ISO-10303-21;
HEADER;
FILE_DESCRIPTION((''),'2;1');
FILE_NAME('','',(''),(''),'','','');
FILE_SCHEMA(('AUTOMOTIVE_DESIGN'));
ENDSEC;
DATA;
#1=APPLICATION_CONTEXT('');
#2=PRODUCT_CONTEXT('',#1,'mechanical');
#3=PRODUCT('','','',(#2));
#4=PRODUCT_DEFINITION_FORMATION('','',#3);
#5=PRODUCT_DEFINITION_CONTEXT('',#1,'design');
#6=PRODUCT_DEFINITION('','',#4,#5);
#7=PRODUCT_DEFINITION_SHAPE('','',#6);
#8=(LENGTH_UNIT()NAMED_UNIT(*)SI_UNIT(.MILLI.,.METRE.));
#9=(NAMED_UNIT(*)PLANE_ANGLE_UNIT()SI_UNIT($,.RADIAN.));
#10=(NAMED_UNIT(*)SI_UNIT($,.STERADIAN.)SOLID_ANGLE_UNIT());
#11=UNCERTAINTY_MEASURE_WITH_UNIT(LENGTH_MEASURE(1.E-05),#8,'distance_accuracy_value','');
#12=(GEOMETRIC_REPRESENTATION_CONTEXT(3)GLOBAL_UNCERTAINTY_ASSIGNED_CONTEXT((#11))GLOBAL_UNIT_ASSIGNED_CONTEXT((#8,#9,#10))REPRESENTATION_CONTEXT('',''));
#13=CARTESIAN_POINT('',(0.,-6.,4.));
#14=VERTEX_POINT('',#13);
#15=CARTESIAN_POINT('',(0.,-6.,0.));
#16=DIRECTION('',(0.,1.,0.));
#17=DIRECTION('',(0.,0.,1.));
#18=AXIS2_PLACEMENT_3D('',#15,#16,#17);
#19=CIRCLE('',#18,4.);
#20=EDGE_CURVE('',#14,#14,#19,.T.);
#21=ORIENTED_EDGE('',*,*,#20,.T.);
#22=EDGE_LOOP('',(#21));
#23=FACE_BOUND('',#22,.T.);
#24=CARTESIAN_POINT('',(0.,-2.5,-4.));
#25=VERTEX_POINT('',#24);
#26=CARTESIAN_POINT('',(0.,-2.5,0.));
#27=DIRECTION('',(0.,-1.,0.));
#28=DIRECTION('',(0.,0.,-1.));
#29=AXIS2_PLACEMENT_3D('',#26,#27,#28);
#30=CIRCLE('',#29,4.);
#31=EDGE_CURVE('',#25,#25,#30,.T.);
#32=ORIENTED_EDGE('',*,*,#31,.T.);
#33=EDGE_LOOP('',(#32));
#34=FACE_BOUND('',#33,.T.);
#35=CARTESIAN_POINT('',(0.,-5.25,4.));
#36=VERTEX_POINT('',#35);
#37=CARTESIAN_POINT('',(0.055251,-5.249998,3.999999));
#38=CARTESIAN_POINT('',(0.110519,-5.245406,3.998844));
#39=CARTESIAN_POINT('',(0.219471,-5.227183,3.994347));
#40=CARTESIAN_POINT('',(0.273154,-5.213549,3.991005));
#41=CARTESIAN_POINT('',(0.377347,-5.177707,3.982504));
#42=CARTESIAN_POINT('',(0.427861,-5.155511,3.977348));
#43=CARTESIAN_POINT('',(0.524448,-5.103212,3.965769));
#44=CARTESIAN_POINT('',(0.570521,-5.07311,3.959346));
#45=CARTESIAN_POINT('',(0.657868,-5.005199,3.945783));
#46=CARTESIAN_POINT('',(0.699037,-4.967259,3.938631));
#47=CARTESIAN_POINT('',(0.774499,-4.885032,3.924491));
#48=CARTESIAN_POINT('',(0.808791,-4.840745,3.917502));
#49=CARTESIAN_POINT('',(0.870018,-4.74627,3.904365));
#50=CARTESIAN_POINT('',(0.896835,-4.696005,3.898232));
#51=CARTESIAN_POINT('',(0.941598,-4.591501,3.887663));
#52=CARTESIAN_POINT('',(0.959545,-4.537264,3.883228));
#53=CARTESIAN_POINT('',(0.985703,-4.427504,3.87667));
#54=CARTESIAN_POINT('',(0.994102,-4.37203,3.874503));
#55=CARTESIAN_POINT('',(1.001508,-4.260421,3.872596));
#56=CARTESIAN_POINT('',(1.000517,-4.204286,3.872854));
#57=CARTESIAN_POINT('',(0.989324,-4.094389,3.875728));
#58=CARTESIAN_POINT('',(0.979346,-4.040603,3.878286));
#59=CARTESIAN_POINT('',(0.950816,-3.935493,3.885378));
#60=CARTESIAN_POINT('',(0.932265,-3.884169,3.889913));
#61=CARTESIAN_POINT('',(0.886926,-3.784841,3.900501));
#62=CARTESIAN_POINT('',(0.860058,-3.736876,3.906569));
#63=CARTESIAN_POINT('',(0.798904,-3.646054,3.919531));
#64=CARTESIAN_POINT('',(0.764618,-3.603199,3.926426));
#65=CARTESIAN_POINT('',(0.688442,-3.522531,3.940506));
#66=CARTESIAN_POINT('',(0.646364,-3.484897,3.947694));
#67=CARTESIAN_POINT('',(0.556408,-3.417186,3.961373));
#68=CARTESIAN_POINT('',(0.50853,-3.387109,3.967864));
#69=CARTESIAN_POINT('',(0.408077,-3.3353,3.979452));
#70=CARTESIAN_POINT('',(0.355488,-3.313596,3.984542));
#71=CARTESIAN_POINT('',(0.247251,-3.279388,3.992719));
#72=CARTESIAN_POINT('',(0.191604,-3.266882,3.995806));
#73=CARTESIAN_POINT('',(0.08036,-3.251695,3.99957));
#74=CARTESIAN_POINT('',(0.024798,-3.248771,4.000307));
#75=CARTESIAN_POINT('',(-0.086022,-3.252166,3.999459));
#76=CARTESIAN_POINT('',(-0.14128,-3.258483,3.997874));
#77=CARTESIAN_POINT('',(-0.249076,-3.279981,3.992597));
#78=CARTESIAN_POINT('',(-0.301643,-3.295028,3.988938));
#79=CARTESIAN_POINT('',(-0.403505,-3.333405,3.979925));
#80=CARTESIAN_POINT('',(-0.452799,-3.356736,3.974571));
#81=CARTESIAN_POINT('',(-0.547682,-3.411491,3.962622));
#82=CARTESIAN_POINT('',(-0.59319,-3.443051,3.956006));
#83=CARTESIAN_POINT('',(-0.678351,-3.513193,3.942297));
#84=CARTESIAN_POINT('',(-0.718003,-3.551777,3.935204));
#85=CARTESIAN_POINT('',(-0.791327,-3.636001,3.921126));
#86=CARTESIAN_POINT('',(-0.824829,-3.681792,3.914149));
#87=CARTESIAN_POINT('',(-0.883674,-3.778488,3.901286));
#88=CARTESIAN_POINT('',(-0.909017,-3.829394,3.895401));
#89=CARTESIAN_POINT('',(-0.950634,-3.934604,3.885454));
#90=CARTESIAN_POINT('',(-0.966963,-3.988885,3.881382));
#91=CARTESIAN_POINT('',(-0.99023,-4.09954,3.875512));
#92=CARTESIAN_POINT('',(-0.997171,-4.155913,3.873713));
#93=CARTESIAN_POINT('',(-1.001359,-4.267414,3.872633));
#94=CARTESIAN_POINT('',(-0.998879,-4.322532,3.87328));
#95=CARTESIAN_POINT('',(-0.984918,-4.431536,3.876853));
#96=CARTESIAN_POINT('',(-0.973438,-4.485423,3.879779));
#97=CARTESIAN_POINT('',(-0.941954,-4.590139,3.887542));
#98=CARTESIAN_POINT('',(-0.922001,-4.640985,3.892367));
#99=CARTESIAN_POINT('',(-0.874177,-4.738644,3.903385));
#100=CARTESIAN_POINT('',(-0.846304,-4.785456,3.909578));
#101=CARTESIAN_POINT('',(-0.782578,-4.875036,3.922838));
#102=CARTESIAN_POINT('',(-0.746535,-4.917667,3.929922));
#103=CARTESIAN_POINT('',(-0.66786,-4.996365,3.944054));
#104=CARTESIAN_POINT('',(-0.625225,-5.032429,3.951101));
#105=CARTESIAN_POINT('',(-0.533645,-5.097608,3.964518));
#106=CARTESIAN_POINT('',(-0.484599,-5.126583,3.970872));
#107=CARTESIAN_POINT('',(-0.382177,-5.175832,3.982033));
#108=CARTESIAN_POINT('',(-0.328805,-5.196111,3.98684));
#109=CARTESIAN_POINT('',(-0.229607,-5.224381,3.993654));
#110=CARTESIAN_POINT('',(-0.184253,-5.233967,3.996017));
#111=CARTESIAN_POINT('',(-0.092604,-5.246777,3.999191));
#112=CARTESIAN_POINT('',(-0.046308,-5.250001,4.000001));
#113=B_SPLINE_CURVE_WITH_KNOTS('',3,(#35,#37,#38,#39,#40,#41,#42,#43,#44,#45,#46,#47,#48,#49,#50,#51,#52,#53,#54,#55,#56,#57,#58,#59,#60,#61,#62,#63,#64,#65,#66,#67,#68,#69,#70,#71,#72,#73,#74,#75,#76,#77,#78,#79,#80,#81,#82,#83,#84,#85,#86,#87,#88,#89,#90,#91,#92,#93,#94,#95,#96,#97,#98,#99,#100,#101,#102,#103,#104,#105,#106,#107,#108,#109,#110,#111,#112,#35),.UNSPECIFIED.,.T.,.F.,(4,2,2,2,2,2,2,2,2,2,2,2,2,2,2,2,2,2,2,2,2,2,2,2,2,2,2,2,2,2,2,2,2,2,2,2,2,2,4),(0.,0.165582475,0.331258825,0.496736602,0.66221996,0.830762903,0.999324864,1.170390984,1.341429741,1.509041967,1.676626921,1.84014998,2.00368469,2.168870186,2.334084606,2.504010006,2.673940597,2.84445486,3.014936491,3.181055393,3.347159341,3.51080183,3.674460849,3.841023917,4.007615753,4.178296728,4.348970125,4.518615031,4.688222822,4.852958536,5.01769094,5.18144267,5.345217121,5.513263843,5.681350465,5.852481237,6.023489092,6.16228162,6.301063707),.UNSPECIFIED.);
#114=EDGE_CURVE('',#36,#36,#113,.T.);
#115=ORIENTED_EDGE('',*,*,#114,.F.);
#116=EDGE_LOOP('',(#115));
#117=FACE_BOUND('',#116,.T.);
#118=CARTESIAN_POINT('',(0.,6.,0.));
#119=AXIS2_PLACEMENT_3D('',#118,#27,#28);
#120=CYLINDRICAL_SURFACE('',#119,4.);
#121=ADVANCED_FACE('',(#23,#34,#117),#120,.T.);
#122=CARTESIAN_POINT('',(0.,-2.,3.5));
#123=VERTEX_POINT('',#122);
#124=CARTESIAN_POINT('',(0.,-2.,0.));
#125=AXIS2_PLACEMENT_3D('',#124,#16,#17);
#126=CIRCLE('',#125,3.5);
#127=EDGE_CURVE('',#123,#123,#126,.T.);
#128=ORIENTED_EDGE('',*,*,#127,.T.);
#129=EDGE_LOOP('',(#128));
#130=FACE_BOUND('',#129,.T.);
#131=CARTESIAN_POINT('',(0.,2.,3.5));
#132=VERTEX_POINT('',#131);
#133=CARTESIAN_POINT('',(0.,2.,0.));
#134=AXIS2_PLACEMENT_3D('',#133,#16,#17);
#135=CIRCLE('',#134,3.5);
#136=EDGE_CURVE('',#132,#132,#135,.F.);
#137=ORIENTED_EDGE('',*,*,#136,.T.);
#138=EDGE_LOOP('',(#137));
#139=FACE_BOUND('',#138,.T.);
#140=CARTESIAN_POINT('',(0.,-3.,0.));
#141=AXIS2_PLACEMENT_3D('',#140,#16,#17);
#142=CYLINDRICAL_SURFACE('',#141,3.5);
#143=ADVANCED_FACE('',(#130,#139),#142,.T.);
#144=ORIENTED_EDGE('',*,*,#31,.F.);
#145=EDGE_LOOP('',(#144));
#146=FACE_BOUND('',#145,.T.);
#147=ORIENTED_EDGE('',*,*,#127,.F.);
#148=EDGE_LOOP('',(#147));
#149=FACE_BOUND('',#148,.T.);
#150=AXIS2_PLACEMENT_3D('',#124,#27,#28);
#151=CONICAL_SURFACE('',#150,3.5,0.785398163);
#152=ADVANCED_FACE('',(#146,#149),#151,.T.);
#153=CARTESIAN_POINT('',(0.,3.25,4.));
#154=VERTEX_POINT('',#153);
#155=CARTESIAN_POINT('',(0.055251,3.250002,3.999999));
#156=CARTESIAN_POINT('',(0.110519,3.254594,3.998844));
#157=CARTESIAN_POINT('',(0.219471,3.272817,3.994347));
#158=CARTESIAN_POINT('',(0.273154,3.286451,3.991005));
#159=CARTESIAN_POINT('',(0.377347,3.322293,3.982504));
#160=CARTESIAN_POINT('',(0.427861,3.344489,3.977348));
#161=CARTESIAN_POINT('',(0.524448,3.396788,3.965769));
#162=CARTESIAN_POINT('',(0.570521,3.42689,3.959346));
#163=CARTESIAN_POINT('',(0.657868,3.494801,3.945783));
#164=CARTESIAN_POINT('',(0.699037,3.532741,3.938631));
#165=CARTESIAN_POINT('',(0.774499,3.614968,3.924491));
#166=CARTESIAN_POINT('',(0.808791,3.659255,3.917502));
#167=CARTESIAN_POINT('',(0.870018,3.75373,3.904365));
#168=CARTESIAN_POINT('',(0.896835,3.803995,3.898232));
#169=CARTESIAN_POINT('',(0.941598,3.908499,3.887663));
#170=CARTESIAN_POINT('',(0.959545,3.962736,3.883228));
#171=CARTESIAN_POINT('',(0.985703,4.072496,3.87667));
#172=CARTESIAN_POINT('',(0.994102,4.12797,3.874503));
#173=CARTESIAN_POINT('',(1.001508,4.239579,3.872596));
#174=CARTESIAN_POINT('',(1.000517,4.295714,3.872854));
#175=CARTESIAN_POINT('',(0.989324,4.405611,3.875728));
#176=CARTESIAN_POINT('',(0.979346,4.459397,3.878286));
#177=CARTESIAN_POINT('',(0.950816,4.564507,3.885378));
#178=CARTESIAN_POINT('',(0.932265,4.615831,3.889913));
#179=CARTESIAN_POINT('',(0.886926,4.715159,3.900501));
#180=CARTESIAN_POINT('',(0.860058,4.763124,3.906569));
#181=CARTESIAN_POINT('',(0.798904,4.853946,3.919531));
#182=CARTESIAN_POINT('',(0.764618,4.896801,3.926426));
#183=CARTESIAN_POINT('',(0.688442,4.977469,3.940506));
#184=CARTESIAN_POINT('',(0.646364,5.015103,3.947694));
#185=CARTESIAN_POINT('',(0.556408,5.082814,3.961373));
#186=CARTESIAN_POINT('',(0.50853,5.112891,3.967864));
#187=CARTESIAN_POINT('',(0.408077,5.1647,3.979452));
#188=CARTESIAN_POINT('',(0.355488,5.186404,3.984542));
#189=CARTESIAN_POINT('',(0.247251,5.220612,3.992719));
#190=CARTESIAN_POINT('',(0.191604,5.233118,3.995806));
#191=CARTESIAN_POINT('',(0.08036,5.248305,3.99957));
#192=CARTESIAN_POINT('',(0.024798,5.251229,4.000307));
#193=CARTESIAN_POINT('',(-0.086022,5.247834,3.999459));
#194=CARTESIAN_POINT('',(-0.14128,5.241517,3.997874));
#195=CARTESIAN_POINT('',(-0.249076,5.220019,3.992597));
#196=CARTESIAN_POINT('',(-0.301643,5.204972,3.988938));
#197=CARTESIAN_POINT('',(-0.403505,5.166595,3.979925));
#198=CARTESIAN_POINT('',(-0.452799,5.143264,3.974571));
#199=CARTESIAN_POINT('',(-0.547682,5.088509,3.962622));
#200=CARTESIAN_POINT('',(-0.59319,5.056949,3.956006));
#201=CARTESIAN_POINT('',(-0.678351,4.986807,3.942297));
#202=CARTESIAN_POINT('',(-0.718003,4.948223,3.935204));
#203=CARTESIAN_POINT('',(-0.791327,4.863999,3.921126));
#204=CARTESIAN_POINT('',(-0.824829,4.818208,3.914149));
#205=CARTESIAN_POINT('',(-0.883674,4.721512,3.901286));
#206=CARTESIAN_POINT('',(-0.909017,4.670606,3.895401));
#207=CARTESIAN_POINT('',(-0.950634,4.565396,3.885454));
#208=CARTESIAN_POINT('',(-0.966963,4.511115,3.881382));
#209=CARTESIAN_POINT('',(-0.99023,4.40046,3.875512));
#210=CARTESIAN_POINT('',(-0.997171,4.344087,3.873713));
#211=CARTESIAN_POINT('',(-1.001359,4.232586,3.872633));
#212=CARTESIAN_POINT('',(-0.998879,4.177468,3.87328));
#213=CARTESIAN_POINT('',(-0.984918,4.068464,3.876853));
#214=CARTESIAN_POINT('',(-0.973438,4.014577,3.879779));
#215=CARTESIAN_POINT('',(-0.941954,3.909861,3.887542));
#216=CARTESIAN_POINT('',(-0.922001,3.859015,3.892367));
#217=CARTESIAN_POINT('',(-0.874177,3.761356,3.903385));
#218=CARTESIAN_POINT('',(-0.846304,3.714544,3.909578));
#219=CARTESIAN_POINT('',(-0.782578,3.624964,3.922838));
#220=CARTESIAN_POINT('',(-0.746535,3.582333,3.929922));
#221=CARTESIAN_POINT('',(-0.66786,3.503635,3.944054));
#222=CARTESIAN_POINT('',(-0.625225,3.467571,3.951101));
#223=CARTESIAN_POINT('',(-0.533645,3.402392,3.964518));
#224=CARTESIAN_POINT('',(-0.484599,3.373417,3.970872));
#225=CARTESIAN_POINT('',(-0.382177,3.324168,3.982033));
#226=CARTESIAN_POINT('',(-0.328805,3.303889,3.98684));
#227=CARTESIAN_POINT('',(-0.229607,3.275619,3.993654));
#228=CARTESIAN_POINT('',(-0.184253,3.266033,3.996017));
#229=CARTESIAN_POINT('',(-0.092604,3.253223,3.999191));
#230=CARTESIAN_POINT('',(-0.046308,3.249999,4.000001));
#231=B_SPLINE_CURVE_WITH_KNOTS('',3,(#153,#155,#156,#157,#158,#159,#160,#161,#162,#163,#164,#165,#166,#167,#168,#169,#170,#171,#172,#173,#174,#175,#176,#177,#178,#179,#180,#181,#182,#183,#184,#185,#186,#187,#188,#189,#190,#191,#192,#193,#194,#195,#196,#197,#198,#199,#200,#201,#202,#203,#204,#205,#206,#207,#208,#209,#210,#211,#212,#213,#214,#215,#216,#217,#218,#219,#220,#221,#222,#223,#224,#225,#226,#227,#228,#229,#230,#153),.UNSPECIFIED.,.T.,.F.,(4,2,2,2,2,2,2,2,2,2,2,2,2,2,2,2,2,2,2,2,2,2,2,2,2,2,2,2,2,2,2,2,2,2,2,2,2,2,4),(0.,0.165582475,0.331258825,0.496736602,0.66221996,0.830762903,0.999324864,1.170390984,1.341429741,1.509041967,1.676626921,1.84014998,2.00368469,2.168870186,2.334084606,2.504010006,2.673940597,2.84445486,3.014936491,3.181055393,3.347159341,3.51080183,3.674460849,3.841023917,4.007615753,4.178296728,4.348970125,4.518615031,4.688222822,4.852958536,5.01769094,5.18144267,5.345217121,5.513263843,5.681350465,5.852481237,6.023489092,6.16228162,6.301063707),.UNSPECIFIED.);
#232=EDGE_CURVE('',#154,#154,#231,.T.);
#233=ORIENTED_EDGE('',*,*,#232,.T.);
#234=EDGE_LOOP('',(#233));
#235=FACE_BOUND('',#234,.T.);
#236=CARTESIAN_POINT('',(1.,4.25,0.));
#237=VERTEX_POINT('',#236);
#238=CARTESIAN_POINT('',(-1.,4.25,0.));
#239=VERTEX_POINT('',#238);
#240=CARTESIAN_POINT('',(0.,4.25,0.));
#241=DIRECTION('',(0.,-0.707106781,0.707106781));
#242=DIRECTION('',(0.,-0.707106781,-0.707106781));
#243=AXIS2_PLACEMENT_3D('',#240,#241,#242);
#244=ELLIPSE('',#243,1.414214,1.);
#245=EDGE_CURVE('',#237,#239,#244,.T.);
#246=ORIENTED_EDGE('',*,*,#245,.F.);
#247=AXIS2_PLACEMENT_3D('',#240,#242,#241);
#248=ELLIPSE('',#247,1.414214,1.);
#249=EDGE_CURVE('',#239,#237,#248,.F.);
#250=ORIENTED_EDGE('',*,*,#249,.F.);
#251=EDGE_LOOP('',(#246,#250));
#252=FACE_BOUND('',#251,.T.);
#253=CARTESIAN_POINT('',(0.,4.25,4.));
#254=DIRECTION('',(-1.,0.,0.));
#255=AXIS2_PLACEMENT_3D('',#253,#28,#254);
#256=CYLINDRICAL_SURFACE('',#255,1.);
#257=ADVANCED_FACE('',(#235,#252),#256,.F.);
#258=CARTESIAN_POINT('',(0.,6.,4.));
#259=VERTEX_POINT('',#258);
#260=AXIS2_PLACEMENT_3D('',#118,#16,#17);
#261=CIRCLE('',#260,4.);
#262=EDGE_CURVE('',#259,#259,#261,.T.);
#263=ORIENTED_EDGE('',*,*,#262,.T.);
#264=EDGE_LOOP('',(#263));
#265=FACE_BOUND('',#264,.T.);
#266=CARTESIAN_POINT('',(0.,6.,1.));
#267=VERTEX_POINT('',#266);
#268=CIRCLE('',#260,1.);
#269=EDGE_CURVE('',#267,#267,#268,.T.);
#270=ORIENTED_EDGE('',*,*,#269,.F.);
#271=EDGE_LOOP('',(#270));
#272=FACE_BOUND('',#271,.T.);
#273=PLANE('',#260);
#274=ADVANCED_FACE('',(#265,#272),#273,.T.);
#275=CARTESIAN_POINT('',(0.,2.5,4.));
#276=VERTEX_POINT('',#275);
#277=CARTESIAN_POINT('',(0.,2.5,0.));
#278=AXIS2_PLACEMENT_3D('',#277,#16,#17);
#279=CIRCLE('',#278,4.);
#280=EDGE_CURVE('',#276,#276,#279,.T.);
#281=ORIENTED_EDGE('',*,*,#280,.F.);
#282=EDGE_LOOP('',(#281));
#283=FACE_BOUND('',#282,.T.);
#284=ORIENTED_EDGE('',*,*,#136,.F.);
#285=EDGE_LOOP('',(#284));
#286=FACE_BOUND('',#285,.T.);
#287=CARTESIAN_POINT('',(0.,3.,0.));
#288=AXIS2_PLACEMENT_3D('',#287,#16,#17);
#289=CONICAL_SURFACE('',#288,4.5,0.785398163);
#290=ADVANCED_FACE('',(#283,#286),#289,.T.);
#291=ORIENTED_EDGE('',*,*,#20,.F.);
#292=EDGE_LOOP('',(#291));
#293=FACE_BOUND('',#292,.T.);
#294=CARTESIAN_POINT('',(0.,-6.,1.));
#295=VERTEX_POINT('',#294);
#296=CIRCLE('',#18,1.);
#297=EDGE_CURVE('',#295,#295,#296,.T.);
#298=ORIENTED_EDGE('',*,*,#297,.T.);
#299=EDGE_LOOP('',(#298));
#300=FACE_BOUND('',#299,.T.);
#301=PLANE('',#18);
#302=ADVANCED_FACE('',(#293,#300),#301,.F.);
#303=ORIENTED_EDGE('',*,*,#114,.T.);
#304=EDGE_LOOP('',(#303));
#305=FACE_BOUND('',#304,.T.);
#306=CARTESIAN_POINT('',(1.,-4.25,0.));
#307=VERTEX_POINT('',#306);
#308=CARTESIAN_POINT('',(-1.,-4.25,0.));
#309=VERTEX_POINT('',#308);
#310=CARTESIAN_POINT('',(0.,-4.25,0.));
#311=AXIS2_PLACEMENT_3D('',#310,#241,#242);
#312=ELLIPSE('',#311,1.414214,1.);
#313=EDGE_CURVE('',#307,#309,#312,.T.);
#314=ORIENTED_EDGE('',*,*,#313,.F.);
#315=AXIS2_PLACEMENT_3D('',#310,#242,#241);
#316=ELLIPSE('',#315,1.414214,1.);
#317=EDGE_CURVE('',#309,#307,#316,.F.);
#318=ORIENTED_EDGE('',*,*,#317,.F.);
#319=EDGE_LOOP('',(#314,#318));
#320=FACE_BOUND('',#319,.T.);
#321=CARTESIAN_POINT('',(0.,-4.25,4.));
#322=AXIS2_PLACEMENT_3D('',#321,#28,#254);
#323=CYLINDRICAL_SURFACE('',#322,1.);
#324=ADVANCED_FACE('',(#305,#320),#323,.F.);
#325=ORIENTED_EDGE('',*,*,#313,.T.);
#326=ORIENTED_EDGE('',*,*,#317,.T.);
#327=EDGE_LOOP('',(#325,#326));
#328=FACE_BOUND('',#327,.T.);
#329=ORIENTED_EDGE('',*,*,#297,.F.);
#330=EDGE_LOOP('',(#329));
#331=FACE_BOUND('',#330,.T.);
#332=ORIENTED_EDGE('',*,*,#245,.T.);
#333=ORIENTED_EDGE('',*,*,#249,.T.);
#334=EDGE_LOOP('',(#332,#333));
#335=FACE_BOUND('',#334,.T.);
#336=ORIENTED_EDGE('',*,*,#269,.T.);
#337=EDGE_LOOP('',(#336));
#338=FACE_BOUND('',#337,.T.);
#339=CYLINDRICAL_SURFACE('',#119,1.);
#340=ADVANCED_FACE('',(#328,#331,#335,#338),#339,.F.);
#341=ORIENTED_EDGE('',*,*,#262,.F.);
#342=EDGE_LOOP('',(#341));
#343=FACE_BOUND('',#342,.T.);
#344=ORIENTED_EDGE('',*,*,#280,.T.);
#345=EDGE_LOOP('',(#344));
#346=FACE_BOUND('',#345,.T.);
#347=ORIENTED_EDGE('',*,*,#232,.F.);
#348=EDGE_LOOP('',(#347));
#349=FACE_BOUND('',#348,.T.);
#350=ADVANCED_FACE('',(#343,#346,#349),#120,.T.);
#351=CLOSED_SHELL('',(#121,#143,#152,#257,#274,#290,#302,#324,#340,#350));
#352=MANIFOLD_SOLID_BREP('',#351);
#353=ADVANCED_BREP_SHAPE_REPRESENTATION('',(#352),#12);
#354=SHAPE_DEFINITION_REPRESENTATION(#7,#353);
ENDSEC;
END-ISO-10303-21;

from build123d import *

# Parameters (mm, degrees)
SKETCH1_R           = 4
SKETCH1_R_2         = 1
BOSS_EXTRUDE1_DEPTH = 6
SKETCH2_R           = 10.066838553
SKETCH2_R_2         = 3.5
CUT_EXTRUDE1_DEPTH  = 3
CHAMFER1_SIZE       = 1
SKETCH3_R           = 1
CUT_EXTRUDE2_DEPTH  = 9.246211251


with BuildPart() as part:
    # Sketch1 → Boss-Extrude1 (new, symmetric)
    with BuildSketch(Plane(origin=(0, 0, 0), x_dir=(1, 0, 0), z_dir=(0, 1, 0))):
        with Locations(Location((0, 0, 0), (0, 0, 270))):
            Circle(SKETCH1_R)
        with Locations(Location((0, 0, 0), (0, 0, 270))):
            Circle(SKETCH1_R_2, mode=Mode.SUBTRACT)
    extrude(amount=BOSS_EXTRUDE1_DEPTH, both=True)

    # Sketch2 → Cut-Extrude1 (cut, symmetric)
    with BuildSketch(Plane(origin=(0, 0, 0), x_dir=(1, 0, 0), z_dir=(0, 1, 0))):
        Circle(SKETCH2_R)
        with Locations(Location((0, 0, 0), (0, 0, 270))):
            Circle(SKETCH2_R_2, mode=Mode.SUBTRACT)
    extrude(amount=CUT_EXTRUDE1_DEPTH, both=True, mode=Mode.SUBTRACT)

    # Chamfer1
    # the kernel refuses this chamfer: 1 mm, written as the material it adds along each edge
    with BuildSketch(Plane(origin=(0, -3, 0), x_dir=(0, 0, 1), z_dir=(-1, 0, 0))) as chamfer1_piece_1_section:
        Polygon((3.5 + CHAMFER1_SIZE, 0), (3.5, CHAMFER1_SIZE), (3.5, 0), align=None)
    chamfer1_piece_1 = revolve(axis=Axis((0, -3, 0), (0, 1, 0)), mode=Mode.PRIVATE)
    chamfer1_piece_1 = chamfer1_piece_1 & Plane(origin=(0, -2.250849305, 0), x_dir=(0, 0, 1), z_dir=(0, 1, 0)) * Cylinder(4, 18, mode=Mode.PRIVATE)
    add(chamfer1_piece_1)
    with BuildSketch(Plane(origin=(0, 3, 0), x_dir=(0, 0, 1), z_dir=(-1, 0, 0))) as chamfer1_piece_2_section:
        Polygon((3.5, -CHAMFER1_SIZE), (3.5 + CHAMFER1_SIZE, 0), (3.5, 0), align=None)
    chamfer1_piece_2 = revolve(axis=Axis((0, 3, 0), (0, 1, 0)), mode=Mode.PRIVATE)
    chamfer1_piece_2 = chamfer1_piece_2 & Plane(origin=(0, 2.250849305, 0), x_dir=(0, 0, 1), z_dir=(0, 1, 0)) * Cylinder(4, 18, mode=Mode.PRIVATE)
    add(chamfer1_piece_2)

    # Sketch3 → Cut-Extrude2 (cut, through all)
    with BuildSketch(Plane.XY):
        with Locations(Location((0, 4.25, 0), (0, 0, 270))):
            Circle(SKETCH3_R)
        with Locations(Location((0, -4.25, 0), (0, 0, 270))):
            Circle(SKETCH3_R)
    extrude(amount=CUT_EXTRUDE2_DEPTH, mode=Mode.SUBTRACT)


solid = part.part
